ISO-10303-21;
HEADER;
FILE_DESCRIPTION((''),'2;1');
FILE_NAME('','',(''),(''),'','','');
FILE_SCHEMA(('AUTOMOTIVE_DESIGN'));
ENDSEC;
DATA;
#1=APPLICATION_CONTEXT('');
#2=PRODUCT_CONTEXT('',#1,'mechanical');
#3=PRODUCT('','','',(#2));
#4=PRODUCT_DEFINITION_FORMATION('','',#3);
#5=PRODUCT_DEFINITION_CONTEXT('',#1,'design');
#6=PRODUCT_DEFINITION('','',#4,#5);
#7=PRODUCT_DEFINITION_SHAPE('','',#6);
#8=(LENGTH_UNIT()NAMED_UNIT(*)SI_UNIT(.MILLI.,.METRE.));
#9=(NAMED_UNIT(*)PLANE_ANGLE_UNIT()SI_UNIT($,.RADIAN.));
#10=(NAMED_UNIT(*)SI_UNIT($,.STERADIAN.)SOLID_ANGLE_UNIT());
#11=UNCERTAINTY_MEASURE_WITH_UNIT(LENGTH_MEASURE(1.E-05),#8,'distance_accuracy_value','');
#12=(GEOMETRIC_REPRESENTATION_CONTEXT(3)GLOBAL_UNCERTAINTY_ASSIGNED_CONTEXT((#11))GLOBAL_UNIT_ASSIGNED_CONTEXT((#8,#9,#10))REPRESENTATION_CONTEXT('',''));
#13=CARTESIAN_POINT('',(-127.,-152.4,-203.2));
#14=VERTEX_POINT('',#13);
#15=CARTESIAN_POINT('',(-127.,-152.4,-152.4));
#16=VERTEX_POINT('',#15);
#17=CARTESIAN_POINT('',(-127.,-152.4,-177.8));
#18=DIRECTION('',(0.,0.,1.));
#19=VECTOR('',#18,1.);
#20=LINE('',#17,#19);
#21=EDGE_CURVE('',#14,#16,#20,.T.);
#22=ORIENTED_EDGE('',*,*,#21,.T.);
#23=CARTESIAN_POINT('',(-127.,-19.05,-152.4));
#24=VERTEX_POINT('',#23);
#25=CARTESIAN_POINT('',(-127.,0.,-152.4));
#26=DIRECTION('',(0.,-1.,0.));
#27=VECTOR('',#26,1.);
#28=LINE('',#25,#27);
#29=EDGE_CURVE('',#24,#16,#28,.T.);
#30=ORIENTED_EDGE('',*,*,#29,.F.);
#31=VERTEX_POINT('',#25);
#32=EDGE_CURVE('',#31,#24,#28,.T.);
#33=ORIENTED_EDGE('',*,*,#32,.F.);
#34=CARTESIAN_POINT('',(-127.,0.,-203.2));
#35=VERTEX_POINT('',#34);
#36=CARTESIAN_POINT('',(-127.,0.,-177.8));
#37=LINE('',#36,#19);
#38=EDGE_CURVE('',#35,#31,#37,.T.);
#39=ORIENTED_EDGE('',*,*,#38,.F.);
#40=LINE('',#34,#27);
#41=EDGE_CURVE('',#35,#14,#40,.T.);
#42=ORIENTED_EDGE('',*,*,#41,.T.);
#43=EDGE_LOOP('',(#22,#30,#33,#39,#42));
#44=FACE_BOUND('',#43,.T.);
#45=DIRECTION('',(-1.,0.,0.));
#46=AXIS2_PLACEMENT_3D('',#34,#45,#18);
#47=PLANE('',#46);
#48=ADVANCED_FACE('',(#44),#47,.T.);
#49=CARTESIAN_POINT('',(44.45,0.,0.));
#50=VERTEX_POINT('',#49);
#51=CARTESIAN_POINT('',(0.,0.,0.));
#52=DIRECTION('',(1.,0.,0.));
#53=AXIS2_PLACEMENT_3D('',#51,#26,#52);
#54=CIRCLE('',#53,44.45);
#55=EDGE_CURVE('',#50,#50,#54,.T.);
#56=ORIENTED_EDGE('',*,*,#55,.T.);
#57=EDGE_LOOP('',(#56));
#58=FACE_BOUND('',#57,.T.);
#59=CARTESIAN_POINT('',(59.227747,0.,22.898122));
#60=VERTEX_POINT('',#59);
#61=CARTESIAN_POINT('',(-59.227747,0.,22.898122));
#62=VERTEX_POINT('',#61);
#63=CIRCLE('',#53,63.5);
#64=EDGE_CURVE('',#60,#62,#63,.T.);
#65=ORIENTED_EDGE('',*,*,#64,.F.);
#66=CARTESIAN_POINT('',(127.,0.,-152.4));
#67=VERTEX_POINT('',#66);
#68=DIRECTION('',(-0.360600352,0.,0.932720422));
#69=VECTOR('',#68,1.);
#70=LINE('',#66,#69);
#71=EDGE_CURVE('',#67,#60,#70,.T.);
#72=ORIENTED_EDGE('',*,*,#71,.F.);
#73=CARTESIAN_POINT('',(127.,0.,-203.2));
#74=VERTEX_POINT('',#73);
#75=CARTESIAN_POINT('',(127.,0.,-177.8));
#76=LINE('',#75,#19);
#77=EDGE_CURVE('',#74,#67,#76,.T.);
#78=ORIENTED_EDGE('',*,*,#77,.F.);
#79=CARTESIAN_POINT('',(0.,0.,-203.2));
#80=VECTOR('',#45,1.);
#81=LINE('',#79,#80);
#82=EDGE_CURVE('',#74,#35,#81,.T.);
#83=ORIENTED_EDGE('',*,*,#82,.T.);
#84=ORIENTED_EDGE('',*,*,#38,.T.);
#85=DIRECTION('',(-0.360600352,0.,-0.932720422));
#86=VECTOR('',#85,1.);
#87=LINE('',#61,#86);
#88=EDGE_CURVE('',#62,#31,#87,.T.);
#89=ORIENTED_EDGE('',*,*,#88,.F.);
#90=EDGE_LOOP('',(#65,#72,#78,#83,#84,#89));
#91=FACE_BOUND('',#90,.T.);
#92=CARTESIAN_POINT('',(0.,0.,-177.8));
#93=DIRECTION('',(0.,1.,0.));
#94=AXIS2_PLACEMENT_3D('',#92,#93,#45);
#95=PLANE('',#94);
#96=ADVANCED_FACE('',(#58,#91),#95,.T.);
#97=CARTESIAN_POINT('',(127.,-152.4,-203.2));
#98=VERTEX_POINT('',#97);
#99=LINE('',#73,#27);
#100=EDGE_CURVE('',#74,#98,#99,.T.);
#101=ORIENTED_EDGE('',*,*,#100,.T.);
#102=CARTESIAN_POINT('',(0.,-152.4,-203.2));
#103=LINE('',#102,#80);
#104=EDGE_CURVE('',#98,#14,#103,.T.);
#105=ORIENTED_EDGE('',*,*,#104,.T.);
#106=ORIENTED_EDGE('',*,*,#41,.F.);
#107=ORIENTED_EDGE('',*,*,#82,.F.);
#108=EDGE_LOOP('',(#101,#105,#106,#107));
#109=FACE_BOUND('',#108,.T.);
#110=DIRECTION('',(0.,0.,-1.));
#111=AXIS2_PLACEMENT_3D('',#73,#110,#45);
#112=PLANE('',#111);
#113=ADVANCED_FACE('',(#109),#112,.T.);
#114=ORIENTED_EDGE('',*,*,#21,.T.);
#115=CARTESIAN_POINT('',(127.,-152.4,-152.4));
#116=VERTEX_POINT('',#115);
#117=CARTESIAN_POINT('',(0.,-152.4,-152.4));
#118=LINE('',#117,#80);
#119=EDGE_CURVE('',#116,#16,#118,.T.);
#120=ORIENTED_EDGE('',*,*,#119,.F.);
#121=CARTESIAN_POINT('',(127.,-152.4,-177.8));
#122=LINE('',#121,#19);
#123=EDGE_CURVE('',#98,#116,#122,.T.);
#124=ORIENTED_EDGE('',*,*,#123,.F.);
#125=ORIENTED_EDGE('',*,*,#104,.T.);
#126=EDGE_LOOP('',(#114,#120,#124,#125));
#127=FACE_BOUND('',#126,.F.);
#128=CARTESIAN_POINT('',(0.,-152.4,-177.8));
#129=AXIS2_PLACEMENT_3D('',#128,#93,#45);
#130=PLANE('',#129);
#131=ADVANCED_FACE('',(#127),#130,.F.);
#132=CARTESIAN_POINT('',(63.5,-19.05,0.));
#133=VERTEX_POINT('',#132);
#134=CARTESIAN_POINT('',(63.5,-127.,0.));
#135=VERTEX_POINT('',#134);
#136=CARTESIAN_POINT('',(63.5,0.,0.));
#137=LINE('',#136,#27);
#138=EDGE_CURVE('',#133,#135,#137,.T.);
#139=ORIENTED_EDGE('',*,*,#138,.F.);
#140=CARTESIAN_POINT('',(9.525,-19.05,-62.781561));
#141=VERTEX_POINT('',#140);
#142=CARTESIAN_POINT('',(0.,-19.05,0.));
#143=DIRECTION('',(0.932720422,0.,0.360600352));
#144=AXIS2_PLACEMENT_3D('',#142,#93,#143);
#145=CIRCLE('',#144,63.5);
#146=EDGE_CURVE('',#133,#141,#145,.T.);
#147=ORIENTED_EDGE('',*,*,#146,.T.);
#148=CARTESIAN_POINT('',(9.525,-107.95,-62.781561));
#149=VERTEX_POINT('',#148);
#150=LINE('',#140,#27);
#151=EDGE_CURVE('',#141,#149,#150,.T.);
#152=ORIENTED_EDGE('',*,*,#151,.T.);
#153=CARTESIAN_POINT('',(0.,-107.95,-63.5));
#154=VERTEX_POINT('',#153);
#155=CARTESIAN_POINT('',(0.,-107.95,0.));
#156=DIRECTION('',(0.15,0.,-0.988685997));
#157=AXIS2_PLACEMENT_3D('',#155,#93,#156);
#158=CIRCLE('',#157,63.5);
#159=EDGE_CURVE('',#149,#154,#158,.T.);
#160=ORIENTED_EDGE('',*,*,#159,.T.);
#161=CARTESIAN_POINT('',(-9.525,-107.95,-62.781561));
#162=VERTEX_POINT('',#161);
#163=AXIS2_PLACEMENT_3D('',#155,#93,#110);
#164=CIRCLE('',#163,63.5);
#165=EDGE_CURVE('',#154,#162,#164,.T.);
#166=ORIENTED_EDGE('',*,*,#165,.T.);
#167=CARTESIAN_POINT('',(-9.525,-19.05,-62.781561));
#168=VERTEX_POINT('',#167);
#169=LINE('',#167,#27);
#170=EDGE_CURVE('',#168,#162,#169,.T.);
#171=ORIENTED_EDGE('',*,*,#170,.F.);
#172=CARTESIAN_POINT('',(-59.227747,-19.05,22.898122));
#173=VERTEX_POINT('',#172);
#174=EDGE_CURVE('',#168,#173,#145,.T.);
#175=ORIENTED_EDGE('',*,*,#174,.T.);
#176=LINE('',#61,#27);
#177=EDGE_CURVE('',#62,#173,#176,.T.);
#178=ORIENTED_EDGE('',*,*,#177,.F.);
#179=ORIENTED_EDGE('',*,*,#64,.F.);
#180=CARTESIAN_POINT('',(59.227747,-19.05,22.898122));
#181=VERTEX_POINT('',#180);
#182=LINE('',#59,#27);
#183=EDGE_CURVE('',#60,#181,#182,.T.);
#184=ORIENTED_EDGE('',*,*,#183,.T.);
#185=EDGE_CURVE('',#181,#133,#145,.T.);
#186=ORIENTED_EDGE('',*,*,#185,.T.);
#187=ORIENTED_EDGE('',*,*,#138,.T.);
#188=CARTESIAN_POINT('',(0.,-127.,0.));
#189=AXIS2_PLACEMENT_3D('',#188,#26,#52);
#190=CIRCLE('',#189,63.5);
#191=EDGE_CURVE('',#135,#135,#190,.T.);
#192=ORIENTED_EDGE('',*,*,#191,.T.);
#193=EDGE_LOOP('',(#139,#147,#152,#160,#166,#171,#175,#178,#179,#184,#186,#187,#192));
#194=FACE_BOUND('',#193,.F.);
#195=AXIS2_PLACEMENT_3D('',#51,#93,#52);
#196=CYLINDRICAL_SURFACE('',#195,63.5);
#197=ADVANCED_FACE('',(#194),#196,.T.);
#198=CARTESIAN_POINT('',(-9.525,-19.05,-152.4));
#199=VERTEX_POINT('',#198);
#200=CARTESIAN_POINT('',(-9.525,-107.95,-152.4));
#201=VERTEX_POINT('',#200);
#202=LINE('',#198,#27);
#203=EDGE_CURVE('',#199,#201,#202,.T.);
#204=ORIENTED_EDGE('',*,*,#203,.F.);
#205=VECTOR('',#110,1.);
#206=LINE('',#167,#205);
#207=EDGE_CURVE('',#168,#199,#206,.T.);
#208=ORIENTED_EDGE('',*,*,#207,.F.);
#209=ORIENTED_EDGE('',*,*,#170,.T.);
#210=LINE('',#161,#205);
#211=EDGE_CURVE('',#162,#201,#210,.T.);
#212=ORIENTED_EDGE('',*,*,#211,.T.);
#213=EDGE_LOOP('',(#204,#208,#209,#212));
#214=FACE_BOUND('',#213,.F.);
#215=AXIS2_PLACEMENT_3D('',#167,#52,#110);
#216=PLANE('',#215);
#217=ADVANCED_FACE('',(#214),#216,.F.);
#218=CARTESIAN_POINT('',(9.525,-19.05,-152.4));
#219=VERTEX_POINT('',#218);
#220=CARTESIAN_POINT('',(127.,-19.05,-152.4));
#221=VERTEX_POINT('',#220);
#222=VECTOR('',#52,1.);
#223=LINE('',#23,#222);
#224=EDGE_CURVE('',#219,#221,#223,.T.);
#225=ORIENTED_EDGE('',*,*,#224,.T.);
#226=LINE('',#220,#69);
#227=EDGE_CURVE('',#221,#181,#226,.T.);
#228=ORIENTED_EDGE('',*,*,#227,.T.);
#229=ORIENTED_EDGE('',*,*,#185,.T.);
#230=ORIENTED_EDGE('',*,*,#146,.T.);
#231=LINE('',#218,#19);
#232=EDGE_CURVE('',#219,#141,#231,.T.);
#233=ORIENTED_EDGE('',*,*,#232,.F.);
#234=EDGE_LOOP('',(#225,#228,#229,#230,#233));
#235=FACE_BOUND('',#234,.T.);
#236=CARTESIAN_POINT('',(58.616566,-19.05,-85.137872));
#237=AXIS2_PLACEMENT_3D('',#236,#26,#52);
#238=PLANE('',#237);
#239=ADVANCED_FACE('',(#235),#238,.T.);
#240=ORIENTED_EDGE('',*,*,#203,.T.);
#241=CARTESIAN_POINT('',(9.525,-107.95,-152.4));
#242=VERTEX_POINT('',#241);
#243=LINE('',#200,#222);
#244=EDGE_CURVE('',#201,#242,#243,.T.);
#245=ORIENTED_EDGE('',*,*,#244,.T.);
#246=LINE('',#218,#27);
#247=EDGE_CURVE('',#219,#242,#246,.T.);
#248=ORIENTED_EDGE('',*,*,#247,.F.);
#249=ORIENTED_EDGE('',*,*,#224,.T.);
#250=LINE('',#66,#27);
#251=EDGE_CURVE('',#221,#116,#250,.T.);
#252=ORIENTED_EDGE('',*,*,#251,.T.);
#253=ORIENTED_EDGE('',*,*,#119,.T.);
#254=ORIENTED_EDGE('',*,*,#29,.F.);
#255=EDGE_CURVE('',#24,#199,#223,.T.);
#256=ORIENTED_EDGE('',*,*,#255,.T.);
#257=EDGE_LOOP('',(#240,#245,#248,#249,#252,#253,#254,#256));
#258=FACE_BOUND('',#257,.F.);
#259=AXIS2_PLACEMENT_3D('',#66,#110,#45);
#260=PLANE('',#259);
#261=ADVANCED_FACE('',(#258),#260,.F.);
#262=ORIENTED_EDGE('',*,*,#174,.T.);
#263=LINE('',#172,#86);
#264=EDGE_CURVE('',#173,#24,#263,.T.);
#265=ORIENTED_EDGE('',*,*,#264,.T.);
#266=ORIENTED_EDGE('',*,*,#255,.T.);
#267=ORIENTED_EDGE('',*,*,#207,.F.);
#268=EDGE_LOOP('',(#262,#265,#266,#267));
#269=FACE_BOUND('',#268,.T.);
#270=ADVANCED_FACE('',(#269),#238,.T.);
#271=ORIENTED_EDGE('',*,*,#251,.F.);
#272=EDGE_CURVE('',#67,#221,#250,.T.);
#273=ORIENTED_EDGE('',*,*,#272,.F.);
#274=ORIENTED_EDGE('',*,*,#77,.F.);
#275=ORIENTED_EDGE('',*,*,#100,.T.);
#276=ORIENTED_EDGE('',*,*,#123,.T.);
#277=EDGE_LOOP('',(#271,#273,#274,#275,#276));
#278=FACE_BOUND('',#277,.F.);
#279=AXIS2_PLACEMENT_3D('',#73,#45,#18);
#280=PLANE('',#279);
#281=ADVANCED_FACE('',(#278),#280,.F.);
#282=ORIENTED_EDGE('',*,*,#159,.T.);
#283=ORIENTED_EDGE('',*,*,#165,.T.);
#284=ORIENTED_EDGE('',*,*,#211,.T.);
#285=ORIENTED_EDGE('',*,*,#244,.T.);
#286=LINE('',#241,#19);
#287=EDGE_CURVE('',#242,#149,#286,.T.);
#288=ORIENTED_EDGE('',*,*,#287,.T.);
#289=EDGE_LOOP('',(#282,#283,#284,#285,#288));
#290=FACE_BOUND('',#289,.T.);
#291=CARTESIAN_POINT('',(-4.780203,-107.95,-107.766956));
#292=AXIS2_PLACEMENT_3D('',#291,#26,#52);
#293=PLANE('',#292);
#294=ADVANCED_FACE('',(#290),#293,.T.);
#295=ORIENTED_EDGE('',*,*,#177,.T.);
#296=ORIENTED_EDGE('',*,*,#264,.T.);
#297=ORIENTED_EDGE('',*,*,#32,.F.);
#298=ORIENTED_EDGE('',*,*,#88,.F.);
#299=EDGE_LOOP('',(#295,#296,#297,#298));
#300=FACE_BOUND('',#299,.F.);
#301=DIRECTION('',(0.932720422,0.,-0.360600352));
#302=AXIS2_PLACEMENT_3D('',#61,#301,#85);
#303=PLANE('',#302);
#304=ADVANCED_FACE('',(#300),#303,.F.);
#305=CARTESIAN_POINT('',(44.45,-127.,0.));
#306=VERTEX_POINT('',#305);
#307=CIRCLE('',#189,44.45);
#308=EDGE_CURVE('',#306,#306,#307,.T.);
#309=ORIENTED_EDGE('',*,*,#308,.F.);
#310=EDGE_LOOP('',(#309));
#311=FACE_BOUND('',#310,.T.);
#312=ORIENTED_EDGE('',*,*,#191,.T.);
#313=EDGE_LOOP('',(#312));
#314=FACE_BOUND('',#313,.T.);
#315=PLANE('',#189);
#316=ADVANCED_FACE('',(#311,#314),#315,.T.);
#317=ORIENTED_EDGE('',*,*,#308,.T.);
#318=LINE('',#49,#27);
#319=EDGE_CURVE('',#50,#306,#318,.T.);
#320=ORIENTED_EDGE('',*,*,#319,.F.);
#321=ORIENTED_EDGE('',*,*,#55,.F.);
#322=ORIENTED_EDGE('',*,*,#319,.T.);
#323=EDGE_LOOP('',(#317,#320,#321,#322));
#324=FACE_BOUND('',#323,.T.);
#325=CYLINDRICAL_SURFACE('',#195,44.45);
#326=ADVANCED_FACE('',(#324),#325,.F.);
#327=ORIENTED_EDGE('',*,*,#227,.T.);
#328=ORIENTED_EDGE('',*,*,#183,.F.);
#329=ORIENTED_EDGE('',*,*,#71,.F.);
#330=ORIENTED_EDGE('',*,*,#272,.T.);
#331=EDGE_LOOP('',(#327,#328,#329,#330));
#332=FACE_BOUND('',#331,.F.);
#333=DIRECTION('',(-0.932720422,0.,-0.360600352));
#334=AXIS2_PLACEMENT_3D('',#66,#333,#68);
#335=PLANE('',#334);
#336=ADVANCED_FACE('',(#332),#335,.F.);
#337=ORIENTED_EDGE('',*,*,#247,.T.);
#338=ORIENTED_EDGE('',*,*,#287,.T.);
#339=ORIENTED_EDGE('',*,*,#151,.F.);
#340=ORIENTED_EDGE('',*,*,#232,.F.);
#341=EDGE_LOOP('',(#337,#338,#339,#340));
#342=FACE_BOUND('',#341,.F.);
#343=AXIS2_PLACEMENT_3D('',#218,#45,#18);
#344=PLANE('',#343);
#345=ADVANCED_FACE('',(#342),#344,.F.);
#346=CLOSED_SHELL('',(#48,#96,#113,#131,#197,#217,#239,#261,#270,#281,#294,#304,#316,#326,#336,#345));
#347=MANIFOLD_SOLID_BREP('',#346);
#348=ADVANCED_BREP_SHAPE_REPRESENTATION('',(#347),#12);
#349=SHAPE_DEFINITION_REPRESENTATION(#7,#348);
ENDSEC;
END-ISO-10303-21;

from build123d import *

# Parameters (mm, degrees)
F0_R     = 63.5
F0_R_2   = 44.45
F1_DEPTH = 127
F3_DEPTH = 19.05
F4_W     = 254
F4_H     = 50.8
F5_DEPTH = 152.4
F7_DEPTH = 88.9


with BuildPart() as f1:
    # F0 (on Front) → F1 (new body)
    with BuildSketch(Plane.XZ):
        Circle(F0_R)
        Circle(F0_R_2, mode=Mode.SUBTRACT)
    extrude(amount=F1_DEPTH)

    # F2 (on Front) → F3 (join)
    with BuildSketch(Plane.XZ):
        with BuildLine():
            Line((127, -152.4), (59.2277468166, 22.8981223472))
            ThreePointArc((59.2277468166, 22.8981223472), (52.3749977043, -35.904172675), (0, -63.5))
            Line((0, -63.5), (0, -152.4))
            Line((0, -152.4), (127, -152.4))
        make_face()
        with BuildLine():
            Line((0, -152.4), (0, -63.5))
            ThreePointArc((0, -63.5), (-52.3749977043, -35.904172675), (-59.2277468166, 22.8981223472))
            Line((-59.2277468166, 22.8981223472), (-127, -152.4))
            Line((-127, -152.4), (0, -152.4))
        make_face()
    extrude(amount=F3_DEPTH)

    # F4 (on face) → F5 (join)
    with BuildSketch(Plane(origin=(0, 0, 0), x_dir=(-1, 0, 0), z_dir=(0, 1, 0))):
        with Locations((0, -177.8)):
            Rectangle(F4_W, F4_H)
    extrude(amount=-F5_DEPTH)

    # F6 (on face) → F7 (join)
    with BuildSketch(Plane.XZ.offset(19.05)):
        with BuildLine():
            Line((0, -152.4), (0, -63.5))
            ThreePointArc((0, -63.5), (-4.776028159, -63.3201354628), (-9.525, -62.7815607882))
            Line((-9.525, -62.7815607882), (-9.525, -152.4))
            Line((-9.525, -152.4), (0, -152.4))
        make_face()
        with BuildLine():
            ThreePointArc((9.525, -62.7815607882), (4.776028159, -63.3201354628), (0, -63.5))
            Line((0, -63.5), (0, -152.4))
            Line((0, -152.4), (9.525, -152.4))
            Line((9.525, -152.4), (9.525, -62.7815607882))
        make_face()
    extrude(amount=F7_DEPTH)


solid = f1.part
